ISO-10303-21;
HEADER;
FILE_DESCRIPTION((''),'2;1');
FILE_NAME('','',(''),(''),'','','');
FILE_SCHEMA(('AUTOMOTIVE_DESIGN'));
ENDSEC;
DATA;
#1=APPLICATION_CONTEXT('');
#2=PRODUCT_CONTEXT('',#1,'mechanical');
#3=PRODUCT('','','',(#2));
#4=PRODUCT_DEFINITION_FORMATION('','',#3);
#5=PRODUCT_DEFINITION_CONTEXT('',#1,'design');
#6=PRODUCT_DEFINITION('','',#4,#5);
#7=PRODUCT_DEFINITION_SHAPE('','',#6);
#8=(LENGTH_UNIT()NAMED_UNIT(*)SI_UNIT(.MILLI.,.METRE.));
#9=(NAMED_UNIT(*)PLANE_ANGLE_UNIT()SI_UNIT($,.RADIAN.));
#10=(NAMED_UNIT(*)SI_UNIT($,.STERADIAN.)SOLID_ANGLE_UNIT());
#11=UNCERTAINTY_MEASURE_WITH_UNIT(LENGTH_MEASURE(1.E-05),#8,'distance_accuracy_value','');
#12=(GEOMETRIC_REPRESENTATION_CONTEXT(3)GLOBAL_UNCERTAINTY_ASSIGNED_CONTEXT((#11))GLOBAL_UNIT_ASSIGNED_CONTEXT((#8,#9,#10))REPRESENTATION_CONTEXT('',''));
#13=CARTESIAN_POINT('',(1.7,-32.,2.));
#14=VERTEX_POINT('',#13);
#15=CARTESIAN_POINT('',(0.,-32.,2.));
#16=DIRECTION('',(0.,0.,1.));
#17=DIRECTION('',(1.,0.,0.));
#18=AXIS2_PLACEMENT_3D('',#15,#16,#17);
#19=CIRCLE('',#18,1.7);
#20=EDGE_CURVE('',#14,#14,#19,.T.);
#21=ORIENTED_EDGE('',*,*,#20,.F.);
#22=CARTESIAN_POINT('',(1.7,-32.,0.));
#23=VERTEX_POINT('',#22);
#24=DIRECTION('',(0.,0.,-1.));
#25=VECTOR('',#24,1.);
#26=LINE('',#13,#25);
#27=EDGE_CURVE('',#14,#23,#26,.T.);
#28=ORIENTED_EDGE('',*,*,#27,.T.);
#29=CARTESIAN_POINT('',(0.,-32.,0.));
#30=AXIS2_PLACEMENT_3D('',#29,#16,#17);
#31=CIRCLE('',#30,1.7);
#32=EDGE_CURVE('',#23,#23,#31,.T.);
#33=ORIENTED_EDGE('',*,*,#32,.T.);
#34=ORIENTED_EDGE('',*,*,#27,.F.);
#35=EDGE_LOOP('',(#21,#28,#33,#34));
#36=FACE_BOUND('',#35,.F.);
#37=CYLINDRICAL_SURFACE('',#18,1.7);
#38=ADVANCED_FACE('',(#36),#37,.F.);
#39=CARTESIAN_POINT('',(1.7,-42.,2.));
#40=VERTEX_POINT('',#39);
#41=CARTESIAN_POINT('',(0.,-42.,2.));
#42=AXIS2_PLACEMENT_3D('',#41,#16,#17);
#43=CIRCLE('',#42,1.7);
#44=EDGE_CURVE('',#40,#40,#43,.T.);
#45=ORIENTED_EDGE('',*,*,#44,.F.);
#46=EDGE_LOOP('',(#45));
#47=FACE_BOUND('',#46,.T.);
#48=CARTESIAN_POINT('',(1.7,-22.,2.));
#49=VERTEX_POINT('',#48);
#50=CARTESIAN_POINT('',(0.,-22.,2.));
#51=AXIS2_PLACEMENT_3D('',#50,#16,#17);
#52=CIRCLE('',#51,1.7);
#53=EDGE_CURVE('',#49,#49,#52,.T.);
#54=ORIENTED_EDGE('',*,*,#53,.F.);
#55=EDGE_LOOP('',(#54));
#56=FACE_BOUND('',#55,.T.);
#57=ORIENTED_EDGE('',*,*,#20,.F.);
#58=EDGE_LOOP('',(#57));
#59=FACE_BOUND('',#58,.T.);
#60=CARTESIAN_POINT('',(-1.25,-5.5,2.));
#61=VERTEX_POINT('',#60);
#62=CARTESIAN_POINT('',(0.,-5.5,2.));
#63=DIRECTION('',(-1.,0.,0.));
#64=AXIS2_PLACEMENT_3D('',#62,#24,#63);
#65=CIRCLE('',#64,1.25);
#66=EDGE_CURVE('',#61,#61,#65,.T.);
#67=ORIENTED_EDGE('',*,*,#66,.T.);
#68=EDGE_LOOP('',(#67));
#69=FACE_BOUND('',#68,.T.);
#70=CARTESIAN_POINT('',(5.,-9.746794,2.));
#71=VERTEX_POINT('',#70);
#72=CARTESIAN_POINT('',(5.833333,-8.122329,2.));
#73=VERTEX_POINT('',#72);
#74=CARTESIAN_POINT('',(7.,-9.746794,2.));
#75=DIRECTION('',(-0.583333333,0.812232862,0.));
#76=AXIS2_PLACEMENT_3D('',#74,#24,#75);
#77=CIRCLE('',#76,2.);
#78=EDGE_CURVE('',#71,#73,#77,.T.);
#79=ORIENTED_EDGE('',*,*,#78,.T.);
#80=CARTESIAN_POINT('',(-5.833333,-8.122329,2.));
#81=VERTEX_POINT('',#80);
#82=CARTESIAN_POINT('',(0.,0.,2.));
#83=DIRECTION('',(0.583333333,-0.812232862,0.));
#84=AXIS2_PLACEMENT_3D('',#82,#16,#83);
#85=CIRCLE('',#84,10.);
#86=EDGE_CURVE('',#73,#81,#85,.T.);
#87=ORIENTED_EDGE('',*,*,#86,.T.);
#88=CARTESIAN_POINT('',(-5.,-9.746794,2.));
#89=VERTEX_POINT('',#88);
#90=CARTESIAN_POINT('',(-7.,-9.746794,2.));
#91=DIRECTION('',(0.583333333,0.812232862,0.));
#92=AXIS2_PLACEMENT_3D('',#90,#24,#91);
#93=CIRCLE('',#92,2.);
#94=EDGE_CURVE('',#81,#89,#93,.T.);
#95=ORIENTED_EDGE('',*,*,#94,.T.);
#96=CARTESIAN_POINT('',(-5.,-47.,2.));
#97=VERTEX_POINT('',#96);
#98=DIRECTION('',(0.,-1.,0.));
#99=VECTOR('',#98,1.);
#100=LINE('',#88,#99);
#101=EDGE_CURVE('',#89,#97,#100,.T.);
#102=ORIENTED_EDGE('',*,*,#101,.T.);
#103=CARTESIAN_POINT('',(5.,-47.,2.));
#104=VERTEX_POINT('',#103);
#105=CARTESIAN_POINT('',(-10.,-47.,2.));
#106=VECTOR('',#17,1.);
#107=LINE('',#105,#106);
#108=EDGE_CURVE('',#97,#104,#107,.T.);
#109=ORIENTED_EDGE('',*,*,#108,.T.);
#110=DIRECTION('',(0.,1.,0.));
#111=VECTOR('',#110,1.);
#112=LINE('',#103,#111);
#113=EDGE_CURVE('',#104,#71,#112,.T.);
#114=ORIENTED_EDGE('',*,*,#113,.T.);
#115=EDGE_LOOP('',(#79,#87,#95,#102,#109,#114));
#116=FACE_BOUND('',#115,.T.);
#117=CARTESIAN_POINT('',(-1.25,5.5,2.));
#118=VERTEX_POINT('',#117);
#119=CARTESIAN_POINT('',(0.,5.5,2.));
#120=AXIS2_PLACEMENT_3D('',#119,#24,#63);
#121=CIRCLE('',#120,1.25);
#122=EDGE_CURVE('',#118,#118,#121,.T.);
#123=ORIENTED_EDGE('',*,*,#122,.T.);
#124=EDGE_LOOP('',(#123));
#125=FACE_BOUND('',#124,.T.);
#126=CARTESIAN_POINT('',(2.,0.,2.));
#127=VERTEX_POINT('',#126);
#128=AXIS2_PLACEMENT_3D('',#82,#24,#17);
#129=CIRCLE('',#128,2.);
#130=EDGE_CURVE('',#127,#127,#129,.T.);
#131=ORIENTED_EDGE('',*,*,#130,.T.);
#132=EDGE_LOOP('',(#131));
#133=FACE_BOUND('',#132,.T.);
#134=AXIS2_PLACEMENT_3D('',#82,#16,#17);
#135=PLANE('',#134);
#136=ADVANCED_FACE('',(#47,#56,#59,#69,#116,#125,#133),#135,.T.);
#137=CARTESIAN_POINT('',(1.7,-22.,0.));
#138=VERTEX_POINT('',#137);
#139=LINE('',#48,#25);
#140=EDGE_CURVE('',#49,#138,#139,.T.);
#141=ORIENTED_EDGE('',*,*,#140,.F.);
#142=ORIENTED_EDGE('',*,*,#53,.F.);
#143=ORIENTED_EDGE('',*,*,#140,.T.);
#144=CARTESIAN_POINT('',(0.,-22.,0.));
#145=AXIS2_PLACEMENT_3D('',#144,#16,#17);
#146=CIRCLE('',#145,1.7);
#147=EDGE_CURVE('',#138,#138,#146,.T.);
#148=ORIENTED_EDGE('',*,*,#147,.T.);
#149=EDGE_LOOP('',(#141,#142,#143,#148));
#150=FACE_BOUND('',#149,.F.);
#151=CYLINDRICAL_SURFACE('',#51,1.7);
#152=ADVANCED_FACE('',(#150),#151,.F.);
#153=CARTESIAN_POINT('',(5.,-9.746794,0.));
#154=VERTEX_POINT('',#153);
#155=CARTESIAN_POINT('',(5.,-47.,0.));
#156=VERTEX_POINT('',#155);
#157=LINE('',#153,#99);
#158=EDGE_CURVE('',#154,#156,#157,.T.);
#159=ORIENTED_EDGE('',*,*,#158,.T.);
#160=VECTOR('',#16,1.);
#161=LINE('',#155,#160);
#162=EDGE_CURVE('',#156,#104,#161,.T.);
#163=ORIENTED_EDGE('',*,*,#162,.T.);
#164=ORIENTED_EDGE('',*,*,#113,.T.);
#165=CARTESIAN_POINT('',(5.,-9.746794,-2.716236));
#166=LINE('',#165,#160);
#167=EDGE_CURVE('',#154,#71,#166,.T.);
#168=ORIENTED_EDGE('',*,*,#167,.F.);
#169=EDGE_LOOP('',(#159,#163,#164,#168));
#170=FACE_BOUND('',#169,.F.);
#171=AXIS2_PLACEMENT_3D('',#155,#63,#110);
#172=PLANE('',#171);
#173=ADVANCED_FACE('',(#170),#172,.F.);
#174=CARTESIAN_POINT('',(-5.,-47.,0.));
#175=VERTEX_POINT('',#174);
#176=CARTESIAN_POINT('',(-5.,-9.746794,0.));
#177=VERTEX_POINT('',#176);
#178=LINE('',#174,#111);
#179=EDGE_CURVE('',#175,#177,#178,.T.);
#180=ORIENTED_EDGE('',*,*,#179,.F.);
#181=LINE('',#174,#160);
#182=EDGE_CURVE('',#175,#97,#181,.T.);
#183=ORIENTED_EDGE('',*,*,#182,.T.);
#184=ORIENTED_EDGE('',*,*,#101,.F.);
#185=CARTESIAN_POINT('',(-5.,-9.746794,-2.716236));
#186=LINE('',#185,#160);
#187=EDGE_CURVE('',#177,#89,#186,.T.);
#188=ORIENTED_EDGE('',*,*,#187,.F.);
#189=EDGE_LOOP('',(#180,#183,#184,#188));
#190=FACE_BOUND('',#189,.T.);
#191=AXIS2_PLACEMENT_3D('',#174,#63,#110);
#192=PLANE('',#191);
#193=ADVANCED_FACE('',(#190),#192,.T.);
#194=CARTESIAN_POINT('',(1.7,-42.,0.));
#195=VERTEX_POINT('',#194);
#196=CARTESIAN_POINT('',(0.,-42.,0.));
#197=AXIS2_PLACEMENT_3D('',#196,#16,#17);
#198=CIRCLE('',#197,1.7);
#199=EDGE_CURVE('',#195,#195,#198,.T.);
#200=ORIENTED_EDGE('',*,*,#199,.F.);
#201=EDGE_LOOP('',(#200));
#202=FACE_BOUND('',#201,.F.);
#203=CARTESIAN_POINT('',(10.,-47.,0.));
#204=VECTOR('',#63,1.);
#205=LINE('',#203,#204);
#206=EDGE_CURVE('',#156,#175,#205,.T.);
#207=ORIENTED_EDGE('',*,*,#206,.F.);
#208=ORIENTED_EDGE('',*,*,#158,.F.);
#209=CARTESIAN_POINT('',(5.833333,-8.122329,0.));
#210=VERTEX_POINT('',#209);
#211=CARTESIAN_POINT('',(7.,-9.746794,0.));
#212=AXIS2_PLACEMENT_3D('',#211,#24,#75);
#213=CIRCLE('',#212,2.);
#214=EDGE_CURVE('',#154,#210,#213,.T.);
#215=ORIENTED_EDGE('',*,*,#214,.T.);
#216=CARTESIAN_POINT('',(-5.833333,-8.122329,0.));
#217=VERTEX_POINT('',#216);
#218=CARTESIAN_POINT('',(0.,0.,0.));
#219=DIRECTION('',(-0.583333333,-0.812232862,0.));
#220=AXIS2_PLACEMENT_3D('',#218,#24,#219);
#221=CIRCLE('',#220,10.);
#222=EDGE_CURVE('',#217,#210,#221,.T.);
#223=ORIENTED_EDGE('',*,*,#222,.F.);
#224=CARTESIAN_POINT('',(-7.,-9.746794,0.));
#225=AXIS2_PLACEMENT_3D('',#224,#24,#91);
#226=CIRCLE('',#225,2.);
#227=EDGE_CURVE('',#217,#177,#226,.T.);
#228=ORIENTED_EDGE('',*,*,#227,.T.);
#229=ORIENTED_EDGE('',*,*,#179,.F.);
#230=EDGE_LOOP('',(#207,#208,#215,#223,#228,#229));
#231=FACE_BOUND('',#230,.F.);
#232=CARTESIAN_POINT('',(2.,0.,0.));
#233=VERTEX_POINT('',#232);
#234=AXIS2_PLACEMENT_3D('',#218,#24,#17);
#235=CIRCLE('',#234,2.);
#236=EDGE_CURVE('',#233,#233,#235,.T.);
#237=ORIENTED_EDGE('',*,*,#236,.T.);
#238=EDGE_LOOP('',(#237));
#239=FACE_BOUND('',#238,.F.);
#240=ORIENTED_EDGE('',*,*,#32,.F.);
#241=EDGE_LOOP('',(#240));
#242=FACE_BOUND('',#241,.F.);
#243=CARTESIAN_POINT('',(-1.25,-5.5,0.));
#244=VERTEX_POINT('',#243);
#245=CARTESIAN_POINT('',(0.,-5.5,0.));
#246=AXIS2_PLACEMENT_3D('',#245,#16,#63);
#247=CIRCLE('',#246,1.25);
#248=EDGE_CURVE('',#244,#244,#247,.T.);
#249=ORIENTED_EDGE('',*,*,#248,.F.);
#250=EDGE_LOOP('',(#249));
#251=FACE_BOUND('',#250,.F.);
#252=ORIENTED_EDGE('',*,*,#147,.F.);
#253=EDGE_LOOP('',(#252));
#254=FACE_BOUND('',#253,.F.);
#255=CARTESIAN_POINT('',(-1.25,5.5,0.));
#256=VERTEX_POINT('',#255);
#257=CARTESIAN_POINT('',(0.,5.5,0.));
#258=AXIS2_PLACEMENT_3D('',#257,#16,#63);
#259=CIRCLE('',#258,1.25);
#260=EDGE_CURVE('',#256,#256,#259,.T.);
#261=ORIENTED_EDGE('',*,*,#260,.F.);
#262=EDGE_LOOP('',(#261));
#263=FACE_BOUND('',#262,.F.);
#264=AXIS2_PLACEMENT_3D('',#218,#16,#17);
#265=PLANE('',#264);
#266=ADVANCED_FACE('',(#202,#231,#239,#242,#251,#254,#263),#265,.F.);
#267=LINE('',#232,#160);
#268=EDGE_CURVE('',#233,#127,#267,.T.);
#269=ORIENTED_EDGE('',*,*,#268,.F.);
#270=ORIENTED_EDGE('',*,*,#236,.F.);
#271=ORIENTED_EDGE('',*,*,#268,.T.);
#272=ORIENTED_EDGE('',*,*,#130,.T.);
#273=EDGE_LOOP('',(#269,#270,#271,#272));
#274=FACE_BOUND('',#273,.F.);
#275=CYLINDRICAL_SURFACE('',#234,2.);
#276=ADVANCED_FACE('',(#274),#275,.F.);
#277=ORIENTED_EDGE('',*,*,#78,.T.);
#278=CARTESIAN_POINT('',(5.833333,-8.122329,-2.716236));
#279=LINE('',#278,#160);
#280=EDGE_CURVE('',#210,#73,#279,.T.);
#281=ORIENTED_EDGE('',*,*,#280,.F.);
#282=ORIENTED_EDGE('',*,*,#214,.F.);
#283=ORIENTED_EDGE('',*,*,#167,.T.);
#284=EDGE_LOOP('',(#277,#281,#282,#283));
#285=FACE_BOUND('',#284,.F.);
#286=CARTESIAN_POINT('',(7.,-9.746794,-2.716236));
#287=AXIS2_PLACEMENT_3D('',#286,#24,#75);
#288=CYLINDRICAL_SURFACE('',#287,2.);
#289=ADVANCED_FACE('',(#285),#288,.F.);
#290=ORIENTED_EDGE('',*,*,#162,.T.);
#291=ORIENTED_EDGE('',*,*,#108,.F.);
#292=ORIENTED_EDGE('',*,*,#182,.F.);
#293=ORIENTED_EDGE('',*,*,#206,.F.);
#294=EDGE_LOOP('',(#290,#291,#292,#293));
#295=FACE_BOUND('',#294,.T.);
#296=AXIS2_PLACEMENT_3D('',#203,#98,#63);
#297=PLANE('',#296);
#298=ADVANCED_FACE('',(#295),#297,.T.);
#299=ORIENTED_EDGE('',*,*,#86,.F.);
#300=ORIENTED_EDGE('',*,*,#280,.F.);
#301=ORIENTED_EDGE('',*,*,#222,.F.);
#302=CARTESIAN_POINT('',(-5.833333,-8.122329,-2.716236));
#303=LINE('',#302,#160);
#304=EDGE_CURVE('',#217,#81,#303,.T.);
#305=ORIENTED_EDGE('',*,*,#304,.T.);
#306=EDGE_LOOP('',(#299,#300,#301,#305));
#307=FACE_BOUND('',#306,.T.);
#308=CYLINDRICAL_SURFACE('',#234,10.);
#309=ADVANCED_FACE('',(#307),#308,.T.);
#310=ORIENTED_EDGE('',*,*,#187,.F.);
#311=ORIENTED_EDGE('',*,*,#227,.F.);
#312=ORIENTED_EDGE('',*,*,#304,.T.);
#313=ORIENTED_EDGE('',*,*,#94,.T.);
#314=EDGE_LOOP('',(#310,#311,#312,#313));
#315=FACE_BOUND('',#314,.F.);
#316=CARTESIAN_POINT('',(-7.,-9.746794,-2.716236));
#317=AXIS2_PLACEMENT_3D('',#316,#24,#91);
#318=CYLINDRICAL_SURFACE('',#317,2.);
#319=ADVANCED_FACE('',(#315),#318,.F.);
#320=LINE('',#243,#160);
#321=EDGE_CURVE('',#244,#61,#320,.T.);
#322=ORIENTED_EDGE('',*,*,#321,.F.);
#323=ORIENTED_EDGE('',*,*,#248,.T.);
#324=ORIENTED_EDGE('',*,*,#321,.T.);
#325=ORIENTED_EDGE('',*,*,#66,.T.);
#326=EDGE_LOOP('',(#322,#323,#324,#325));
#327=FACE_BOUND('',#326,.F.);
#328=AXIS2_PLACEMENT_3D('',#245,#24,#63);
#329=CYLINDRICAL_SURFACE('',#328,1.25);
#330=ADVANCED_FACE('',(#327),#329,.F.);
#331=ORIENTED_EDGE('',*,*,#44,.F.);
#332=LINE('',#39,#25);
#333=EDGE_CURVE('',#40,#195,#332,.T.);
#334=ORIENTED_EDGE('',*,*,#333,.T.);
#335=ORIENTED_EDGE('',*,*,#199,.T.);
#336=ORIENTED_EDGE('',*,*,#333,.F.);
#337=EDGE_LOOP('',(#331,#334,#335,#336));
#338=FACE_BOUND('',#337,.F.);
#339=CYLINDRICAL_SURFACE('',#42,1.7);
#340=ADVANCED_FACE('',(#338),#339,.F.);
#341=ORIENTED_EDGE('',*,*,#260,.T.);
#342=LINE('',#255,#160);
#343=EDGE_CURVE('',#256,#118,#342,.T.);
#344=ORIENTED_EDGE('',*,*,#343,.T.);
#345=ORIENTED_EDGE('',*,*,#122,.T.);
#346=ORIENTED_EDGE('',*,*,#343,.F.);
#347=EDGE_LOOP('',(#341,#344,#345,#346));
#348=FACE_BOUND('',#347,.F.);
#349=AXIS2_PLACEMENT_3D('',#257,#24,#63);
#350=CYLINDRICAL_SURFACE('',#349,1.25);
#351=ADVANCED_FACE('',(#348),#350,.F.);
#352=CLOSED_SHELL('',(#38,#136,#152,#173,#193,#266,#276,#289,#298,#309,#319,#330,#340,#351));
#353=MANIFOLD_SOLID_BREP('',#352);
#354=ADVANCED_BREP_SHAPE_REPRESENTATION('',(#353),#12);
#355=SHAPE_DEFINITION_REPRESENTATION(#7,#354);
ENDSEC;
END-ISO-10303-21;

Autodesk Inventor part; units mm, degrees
ref_plane "YZ Plane" through (0, 0, 0) normal (1, 0, 0) x (0, 1, 0)
ref_plane "XZ Plane" through (0, 0, 0) normal (0, 1, 0) x (-1, 0, 0)
ref_plane "XY Plane" through (0, 0, 0) normal (0, 0, 1) x (1, 0, 0)
sketch "スケッチ1" plane through (0, 0, 0) normal (0, 0, 1) x (1, 0, 0)
  circle A0 centre (0, 0) radius 10
  circle A1 centre (0, 0) radius 2
  line L0 (0, -2) -> (0, -47)
  line L1 (10, 0) -> (10, -47)
  line L2 (10, -47) -> (-10, -47)
  line L3 (-10, -47) -> (-10, 0)
  circle A2 centre (0, -32) radius 1
  circle A3 centre (0, -42) radius 1
  circle A4 centre (0, -22) radius 1
  dimension "d1" = 4
  dimension "d0" = 20
  dimension "d2" = 45
  dimension "d9" = 2
  dimension "d10" = 2
  dimension "d11" = 2
  dimension "d31" = 10
  dimension "d32" = 22
extrude "押し出し1" add sketch "スケッチ1" along normal blind 2
sketch "スケッチ2" plane through (0, 0, 2) normal (0, 0, 1) x (1, 0, 0)
  circle A0 centre (0, -32) radius 1.7
  circle A1 centre (0, -22) radius 1.7
  circle A2 centre (0, -42) radius 1.7
  point P0 (0, 0)
  dimension "d12" = 3.4
  dimension "d13" = 3.4
  dimension "d14" = 3.4
extrude "押し出し2" cut sketch "スケッチ2" against normal blind 10
sketch "スケッチ3" plane through (0, 0, 0) normal (0, 0, -1) x (-1, 0, 0)
  line L0 (10, -47) -> (-10, -47) projected
  line L1 (10, -47) -> (5, -47)
  circle A0 centre (0, 0) radius 10
  line L2 (5, -47) -> (5, -8.6603)
  line L3 (10, 0) -> (10, -47) projected
  line L4 (10, -47) -> (10, 0)
  line L5 (-10, -47) -> (-10, 0) projected
  line L6 (-10, 0) -> (-10, -47)
  line L7 (-10, -47) -> (-5, -47)
  line L8 (-5, -47) -> (-5, -8.6603)
  dimension "d17" = 5
  dimension "d18" = 5
extrude "押し出し3" cut sketch "スケッチ3" against normal blind 10 contours L0 L2 A0 L3 | L0 L5 A0 L8
sketch "スケッチ4" plane through (0, 0, 0) normal (0, 0, -1) x (-1, 0, 0)
  circle A0 centre (0, 0) radius 5.5
  circle A1 centre (0, -5.5) radius 1.25
  circle A2 centre (0, 5.5) radius 1.25
  dimension "d21" = 11
  dimension "d22" = 2.5
  dimension "d23" = 2.5
extrude "押し出し4" cut sketch "スケッチ4" against normal blind 10 contours A2 A0 | A0 A2 | A1 A0 | A0 A1
fillet "フィレット1" radius 2 2 edges at (5, -8.6603, 1) (-5, -8.6603, 1)
properties part number "cutter_board"
